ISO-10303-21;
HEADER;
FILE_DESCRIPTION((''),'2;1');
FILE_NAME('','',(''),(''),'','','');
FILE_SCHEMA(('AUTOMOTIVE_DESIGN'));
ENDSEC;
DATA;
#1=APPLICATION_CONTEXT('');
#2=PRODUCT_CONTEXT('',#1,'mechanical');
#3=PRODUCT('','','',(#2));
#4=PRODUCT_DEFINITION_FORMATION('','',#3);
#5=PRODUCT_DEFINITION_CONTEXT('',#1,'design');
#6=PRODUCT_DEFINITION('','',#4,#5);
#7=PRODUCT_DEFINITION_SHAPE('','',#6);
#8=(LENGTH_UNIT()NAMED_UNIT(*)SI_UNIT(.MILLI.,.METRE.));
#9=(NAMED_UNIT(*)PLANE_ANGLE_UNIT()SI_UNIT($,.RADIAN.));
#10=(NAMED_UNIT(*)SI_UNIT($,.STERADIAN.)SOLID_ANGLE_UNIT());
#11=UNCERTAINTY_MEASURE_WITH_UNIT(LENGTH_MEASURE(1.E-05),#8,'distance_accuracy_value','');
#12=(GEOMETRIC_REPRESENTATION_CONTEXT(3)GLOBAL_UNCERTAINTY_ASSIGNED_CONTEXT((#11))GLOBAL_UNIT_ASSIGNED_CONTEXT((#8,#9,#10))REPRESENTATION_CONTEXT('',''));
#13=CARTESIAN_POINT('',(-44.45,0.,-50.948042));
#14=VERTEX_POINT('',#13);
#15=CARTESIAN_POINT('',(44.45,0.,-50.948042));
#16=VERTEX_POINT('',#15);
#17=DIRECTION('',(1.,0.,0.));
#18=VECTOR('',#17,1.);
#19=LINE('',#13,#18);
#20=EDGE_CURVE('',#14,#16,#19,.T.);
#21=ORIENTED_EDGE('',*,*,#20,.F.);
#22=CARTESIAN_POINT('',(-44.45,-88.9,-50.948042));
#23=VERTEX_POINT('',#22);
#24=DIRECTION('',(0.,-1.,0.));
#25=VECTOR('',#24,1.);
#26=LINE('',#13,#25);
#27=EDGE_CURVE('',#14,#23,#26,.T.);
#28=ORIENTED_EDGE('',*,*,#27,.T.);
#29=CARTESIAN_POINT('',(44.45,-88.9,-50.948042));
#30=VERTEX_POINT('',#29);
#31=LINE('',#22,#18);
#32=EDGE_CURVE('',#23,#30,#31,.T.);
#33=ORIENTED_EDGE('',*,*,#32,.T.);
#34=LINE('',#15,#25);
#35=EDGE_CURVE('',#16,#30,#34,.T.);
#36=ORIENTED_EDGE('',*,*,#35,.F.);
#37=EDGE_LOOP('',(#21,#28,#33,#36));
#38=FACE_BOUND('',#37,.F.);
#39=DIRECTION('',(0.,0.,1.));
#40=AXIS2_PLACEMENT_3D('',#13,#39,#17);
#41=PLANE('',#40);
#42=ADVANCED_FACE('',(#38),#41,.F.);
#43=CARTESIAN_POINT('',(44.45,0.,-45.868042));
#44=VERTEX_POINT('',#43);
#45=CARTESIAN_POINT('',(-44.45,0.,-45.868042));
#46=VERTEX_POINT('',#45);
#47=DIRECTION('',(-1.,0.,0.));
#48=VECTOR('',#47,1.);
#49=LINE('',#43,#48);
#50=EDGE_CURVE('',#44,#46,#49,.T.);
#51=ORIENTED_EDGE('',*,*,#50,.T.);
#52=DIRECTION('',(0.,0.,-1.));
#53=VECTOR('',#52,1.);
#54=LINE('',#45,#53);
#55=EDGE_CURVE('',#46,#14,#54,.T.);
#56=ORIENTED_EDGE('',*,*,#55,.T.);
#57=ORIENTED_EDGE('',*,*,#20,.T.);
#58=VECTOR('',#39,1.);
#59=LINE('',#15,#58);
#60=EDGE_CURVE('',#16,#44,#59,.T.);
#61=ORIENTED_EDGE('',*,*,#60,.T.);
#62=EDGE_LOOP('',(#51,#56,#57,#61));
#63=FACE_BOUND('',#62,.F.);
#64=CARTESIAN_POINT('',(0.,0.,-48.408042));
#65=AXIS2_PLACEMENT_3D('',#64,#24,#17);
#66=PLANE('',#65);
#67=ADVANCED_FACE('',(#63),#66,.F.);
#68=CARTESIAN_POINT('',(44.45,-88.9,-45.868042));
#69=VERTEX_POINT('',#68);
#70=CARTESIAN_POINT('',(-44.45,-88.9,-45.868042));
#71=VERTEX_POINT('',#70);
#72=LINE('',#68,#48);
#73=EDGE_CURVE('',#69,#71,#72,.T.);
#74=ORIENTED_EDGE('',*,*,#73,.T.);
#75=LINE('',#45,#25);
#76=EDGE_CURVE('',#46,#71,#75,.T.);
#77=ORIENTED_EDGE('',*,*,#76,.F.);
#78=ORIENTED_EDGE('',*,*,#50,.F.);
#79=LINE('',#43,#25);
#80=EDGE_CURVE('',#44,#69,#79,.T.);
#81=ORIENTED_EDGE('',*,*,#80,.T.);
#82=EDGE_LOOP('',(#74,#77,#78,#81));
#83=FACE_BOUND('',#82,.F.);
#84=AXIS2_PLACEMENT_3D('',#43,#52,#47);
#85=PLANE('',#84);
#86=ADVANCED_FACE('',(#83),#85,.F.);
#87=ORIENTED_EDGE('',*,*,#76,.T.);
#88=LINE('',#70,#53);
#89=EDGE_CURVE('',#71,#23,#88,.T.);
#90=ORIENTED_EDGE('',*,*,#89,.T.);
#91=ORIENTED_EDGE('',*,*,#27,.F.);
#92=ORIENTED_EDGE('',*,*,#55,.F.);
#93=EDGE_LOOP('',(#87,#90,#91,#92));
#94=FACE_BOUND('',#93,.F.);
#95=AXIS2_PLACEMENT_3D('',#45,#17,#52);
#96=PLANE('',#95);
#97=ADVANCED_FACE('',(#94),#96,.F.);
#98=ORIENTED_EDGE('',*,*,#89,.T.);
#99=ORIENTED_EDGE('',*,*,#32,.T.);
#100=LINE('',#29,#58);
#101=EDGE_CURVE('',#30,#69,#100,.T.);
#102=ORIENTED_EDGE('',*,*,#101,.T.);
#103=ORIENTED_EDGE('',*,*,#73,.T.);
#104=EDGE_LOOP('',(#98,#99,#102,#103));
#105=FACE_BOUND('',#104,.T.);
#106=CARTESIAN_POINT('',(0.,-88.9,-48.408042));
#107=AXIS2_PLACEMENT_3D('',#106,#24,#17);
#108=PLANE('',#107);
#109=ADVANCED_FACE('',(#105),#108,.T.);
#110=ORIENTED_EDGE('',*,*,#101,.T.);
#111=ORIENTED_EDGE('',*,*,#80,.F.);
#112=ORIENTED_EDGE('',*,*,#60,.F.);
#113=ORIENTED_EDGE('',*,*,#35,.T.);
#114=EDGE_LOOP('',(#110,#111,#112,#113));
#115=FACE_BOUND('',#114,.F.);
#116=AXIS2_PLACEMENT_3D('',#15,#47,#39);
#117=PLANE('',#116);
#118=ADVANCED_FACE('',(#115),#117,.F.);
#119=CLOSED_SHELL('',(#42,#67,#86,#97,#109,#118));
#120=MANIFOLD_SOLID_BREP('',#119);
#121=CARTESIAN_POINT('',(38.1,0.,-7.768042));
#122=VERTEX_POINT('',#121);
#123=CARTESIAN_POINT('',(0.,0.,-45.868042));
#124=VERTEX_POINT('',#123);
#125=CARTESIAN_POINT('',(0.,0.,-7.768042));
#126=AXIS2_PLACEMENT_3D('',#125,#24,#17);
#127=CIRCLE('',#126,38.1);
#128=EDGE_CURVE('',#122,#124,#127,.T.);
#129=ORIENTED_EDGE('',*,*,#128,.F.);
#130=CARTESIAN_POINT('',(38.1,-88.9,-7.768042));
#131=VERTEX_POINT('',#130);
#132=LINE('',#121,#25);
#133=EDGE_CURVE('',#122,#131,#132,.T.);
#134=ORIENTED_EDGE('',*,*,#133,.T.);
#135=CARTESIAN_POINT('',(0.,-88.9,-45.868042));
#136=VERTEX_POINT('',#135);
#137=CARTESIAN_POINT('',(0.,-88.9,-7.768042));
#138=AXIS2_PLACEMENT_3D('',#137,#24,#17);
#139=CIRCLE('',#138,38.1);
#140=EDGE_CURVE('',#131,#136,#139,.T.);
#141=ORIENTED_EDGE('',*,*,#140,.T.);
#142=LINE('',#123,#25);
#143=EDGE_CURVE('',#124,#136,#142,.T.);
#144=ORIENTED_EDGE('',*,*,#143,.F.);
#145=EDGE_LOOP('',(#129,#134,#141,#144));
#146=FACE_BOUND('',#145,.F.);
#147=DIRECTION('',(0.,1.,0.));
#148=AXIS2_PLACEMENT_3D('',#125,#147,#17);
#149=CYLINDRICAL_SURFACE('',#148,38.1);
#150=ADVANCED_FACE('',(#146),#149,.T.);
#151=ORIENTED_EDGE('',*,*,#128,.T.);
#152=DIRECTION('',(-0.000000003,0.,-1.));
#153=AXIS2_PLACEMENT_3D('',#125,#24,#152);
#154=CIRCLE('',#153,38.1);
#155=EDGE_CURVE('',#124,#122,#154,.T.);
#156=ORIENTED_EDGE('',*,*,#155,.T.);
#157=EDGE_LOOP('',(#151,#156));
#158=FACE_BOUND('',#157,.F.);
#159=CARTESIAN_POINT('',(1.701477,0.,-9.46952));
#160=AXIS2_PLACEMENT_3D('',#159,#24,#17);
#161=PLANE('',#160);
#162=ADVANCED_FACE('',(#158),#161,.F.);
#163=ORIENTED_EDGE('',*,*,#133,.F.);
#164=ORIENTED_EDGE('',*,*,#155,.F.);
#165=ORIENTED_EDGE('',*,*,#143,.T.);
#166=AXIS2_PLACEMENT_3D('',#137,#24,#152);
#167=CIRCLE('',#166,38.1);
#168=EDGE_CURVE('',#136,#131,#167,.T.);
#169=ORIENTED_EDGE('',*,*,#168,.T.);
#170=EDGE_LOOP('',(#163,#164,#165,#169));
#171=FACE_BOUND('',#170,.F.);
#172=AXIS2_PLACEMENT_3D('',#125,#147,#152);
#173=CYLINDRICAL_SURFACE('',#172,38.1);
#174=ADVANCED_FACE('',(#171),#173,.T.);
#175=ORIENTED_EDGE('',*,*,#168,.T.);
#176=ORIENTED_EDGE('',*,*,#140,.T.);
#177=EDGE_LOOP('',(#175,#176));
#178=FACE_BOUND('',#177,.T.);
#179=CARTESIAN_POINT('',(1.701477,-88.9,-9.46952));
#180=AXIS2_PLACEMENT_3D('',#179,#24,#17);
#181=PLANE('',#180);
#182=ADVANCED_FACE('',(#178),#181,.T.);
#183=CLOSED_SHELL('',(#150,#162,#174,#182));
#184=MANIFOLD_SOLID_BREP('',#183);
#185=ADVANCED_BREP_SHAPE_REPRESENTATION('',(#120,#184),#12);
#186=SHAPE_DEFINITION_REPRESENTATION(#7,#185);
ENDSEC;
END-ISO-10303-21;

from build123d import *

# Parameters (mm, degrees)
F1_DEPTH = 88.9


# Not quite as in the source:
# - a feature names something its author has since deleted; it is built from what else it names


with BuildPart() as f1:
    # F0 (on Front) → F1 (new body)
    with BuildSketch(Plane.XZ):
        with BuildLine():
            ThreePointArc((-1.019e-07, -45.8680424225), (26.9407683272, -34.7088108218), (38.1, -7.7680424225))
            ThreePointArc((38.1, -7.7680424225), (-26.9407683272, 19.1727259767), (-1.019e-07, -45.8680424225))
        make_face()
    extrude(amount=F1_DEPTH)


with BuildPart() as f1b:
    # F0 (on Front) → F1, piece 2 (new body)
    with BuildSketch(Plane.XZ):
        Polygon((44.45, -45.8680424225), (-1.019e-07, -45.8680424225), (-44.45, -45.8680424225), (-44.45, -50.9480424225), (44.45, -50.9480424225), align=None)
    extrude(amount=F1_DEPTH)


solid = Compound([f1.part, f1b.part])
